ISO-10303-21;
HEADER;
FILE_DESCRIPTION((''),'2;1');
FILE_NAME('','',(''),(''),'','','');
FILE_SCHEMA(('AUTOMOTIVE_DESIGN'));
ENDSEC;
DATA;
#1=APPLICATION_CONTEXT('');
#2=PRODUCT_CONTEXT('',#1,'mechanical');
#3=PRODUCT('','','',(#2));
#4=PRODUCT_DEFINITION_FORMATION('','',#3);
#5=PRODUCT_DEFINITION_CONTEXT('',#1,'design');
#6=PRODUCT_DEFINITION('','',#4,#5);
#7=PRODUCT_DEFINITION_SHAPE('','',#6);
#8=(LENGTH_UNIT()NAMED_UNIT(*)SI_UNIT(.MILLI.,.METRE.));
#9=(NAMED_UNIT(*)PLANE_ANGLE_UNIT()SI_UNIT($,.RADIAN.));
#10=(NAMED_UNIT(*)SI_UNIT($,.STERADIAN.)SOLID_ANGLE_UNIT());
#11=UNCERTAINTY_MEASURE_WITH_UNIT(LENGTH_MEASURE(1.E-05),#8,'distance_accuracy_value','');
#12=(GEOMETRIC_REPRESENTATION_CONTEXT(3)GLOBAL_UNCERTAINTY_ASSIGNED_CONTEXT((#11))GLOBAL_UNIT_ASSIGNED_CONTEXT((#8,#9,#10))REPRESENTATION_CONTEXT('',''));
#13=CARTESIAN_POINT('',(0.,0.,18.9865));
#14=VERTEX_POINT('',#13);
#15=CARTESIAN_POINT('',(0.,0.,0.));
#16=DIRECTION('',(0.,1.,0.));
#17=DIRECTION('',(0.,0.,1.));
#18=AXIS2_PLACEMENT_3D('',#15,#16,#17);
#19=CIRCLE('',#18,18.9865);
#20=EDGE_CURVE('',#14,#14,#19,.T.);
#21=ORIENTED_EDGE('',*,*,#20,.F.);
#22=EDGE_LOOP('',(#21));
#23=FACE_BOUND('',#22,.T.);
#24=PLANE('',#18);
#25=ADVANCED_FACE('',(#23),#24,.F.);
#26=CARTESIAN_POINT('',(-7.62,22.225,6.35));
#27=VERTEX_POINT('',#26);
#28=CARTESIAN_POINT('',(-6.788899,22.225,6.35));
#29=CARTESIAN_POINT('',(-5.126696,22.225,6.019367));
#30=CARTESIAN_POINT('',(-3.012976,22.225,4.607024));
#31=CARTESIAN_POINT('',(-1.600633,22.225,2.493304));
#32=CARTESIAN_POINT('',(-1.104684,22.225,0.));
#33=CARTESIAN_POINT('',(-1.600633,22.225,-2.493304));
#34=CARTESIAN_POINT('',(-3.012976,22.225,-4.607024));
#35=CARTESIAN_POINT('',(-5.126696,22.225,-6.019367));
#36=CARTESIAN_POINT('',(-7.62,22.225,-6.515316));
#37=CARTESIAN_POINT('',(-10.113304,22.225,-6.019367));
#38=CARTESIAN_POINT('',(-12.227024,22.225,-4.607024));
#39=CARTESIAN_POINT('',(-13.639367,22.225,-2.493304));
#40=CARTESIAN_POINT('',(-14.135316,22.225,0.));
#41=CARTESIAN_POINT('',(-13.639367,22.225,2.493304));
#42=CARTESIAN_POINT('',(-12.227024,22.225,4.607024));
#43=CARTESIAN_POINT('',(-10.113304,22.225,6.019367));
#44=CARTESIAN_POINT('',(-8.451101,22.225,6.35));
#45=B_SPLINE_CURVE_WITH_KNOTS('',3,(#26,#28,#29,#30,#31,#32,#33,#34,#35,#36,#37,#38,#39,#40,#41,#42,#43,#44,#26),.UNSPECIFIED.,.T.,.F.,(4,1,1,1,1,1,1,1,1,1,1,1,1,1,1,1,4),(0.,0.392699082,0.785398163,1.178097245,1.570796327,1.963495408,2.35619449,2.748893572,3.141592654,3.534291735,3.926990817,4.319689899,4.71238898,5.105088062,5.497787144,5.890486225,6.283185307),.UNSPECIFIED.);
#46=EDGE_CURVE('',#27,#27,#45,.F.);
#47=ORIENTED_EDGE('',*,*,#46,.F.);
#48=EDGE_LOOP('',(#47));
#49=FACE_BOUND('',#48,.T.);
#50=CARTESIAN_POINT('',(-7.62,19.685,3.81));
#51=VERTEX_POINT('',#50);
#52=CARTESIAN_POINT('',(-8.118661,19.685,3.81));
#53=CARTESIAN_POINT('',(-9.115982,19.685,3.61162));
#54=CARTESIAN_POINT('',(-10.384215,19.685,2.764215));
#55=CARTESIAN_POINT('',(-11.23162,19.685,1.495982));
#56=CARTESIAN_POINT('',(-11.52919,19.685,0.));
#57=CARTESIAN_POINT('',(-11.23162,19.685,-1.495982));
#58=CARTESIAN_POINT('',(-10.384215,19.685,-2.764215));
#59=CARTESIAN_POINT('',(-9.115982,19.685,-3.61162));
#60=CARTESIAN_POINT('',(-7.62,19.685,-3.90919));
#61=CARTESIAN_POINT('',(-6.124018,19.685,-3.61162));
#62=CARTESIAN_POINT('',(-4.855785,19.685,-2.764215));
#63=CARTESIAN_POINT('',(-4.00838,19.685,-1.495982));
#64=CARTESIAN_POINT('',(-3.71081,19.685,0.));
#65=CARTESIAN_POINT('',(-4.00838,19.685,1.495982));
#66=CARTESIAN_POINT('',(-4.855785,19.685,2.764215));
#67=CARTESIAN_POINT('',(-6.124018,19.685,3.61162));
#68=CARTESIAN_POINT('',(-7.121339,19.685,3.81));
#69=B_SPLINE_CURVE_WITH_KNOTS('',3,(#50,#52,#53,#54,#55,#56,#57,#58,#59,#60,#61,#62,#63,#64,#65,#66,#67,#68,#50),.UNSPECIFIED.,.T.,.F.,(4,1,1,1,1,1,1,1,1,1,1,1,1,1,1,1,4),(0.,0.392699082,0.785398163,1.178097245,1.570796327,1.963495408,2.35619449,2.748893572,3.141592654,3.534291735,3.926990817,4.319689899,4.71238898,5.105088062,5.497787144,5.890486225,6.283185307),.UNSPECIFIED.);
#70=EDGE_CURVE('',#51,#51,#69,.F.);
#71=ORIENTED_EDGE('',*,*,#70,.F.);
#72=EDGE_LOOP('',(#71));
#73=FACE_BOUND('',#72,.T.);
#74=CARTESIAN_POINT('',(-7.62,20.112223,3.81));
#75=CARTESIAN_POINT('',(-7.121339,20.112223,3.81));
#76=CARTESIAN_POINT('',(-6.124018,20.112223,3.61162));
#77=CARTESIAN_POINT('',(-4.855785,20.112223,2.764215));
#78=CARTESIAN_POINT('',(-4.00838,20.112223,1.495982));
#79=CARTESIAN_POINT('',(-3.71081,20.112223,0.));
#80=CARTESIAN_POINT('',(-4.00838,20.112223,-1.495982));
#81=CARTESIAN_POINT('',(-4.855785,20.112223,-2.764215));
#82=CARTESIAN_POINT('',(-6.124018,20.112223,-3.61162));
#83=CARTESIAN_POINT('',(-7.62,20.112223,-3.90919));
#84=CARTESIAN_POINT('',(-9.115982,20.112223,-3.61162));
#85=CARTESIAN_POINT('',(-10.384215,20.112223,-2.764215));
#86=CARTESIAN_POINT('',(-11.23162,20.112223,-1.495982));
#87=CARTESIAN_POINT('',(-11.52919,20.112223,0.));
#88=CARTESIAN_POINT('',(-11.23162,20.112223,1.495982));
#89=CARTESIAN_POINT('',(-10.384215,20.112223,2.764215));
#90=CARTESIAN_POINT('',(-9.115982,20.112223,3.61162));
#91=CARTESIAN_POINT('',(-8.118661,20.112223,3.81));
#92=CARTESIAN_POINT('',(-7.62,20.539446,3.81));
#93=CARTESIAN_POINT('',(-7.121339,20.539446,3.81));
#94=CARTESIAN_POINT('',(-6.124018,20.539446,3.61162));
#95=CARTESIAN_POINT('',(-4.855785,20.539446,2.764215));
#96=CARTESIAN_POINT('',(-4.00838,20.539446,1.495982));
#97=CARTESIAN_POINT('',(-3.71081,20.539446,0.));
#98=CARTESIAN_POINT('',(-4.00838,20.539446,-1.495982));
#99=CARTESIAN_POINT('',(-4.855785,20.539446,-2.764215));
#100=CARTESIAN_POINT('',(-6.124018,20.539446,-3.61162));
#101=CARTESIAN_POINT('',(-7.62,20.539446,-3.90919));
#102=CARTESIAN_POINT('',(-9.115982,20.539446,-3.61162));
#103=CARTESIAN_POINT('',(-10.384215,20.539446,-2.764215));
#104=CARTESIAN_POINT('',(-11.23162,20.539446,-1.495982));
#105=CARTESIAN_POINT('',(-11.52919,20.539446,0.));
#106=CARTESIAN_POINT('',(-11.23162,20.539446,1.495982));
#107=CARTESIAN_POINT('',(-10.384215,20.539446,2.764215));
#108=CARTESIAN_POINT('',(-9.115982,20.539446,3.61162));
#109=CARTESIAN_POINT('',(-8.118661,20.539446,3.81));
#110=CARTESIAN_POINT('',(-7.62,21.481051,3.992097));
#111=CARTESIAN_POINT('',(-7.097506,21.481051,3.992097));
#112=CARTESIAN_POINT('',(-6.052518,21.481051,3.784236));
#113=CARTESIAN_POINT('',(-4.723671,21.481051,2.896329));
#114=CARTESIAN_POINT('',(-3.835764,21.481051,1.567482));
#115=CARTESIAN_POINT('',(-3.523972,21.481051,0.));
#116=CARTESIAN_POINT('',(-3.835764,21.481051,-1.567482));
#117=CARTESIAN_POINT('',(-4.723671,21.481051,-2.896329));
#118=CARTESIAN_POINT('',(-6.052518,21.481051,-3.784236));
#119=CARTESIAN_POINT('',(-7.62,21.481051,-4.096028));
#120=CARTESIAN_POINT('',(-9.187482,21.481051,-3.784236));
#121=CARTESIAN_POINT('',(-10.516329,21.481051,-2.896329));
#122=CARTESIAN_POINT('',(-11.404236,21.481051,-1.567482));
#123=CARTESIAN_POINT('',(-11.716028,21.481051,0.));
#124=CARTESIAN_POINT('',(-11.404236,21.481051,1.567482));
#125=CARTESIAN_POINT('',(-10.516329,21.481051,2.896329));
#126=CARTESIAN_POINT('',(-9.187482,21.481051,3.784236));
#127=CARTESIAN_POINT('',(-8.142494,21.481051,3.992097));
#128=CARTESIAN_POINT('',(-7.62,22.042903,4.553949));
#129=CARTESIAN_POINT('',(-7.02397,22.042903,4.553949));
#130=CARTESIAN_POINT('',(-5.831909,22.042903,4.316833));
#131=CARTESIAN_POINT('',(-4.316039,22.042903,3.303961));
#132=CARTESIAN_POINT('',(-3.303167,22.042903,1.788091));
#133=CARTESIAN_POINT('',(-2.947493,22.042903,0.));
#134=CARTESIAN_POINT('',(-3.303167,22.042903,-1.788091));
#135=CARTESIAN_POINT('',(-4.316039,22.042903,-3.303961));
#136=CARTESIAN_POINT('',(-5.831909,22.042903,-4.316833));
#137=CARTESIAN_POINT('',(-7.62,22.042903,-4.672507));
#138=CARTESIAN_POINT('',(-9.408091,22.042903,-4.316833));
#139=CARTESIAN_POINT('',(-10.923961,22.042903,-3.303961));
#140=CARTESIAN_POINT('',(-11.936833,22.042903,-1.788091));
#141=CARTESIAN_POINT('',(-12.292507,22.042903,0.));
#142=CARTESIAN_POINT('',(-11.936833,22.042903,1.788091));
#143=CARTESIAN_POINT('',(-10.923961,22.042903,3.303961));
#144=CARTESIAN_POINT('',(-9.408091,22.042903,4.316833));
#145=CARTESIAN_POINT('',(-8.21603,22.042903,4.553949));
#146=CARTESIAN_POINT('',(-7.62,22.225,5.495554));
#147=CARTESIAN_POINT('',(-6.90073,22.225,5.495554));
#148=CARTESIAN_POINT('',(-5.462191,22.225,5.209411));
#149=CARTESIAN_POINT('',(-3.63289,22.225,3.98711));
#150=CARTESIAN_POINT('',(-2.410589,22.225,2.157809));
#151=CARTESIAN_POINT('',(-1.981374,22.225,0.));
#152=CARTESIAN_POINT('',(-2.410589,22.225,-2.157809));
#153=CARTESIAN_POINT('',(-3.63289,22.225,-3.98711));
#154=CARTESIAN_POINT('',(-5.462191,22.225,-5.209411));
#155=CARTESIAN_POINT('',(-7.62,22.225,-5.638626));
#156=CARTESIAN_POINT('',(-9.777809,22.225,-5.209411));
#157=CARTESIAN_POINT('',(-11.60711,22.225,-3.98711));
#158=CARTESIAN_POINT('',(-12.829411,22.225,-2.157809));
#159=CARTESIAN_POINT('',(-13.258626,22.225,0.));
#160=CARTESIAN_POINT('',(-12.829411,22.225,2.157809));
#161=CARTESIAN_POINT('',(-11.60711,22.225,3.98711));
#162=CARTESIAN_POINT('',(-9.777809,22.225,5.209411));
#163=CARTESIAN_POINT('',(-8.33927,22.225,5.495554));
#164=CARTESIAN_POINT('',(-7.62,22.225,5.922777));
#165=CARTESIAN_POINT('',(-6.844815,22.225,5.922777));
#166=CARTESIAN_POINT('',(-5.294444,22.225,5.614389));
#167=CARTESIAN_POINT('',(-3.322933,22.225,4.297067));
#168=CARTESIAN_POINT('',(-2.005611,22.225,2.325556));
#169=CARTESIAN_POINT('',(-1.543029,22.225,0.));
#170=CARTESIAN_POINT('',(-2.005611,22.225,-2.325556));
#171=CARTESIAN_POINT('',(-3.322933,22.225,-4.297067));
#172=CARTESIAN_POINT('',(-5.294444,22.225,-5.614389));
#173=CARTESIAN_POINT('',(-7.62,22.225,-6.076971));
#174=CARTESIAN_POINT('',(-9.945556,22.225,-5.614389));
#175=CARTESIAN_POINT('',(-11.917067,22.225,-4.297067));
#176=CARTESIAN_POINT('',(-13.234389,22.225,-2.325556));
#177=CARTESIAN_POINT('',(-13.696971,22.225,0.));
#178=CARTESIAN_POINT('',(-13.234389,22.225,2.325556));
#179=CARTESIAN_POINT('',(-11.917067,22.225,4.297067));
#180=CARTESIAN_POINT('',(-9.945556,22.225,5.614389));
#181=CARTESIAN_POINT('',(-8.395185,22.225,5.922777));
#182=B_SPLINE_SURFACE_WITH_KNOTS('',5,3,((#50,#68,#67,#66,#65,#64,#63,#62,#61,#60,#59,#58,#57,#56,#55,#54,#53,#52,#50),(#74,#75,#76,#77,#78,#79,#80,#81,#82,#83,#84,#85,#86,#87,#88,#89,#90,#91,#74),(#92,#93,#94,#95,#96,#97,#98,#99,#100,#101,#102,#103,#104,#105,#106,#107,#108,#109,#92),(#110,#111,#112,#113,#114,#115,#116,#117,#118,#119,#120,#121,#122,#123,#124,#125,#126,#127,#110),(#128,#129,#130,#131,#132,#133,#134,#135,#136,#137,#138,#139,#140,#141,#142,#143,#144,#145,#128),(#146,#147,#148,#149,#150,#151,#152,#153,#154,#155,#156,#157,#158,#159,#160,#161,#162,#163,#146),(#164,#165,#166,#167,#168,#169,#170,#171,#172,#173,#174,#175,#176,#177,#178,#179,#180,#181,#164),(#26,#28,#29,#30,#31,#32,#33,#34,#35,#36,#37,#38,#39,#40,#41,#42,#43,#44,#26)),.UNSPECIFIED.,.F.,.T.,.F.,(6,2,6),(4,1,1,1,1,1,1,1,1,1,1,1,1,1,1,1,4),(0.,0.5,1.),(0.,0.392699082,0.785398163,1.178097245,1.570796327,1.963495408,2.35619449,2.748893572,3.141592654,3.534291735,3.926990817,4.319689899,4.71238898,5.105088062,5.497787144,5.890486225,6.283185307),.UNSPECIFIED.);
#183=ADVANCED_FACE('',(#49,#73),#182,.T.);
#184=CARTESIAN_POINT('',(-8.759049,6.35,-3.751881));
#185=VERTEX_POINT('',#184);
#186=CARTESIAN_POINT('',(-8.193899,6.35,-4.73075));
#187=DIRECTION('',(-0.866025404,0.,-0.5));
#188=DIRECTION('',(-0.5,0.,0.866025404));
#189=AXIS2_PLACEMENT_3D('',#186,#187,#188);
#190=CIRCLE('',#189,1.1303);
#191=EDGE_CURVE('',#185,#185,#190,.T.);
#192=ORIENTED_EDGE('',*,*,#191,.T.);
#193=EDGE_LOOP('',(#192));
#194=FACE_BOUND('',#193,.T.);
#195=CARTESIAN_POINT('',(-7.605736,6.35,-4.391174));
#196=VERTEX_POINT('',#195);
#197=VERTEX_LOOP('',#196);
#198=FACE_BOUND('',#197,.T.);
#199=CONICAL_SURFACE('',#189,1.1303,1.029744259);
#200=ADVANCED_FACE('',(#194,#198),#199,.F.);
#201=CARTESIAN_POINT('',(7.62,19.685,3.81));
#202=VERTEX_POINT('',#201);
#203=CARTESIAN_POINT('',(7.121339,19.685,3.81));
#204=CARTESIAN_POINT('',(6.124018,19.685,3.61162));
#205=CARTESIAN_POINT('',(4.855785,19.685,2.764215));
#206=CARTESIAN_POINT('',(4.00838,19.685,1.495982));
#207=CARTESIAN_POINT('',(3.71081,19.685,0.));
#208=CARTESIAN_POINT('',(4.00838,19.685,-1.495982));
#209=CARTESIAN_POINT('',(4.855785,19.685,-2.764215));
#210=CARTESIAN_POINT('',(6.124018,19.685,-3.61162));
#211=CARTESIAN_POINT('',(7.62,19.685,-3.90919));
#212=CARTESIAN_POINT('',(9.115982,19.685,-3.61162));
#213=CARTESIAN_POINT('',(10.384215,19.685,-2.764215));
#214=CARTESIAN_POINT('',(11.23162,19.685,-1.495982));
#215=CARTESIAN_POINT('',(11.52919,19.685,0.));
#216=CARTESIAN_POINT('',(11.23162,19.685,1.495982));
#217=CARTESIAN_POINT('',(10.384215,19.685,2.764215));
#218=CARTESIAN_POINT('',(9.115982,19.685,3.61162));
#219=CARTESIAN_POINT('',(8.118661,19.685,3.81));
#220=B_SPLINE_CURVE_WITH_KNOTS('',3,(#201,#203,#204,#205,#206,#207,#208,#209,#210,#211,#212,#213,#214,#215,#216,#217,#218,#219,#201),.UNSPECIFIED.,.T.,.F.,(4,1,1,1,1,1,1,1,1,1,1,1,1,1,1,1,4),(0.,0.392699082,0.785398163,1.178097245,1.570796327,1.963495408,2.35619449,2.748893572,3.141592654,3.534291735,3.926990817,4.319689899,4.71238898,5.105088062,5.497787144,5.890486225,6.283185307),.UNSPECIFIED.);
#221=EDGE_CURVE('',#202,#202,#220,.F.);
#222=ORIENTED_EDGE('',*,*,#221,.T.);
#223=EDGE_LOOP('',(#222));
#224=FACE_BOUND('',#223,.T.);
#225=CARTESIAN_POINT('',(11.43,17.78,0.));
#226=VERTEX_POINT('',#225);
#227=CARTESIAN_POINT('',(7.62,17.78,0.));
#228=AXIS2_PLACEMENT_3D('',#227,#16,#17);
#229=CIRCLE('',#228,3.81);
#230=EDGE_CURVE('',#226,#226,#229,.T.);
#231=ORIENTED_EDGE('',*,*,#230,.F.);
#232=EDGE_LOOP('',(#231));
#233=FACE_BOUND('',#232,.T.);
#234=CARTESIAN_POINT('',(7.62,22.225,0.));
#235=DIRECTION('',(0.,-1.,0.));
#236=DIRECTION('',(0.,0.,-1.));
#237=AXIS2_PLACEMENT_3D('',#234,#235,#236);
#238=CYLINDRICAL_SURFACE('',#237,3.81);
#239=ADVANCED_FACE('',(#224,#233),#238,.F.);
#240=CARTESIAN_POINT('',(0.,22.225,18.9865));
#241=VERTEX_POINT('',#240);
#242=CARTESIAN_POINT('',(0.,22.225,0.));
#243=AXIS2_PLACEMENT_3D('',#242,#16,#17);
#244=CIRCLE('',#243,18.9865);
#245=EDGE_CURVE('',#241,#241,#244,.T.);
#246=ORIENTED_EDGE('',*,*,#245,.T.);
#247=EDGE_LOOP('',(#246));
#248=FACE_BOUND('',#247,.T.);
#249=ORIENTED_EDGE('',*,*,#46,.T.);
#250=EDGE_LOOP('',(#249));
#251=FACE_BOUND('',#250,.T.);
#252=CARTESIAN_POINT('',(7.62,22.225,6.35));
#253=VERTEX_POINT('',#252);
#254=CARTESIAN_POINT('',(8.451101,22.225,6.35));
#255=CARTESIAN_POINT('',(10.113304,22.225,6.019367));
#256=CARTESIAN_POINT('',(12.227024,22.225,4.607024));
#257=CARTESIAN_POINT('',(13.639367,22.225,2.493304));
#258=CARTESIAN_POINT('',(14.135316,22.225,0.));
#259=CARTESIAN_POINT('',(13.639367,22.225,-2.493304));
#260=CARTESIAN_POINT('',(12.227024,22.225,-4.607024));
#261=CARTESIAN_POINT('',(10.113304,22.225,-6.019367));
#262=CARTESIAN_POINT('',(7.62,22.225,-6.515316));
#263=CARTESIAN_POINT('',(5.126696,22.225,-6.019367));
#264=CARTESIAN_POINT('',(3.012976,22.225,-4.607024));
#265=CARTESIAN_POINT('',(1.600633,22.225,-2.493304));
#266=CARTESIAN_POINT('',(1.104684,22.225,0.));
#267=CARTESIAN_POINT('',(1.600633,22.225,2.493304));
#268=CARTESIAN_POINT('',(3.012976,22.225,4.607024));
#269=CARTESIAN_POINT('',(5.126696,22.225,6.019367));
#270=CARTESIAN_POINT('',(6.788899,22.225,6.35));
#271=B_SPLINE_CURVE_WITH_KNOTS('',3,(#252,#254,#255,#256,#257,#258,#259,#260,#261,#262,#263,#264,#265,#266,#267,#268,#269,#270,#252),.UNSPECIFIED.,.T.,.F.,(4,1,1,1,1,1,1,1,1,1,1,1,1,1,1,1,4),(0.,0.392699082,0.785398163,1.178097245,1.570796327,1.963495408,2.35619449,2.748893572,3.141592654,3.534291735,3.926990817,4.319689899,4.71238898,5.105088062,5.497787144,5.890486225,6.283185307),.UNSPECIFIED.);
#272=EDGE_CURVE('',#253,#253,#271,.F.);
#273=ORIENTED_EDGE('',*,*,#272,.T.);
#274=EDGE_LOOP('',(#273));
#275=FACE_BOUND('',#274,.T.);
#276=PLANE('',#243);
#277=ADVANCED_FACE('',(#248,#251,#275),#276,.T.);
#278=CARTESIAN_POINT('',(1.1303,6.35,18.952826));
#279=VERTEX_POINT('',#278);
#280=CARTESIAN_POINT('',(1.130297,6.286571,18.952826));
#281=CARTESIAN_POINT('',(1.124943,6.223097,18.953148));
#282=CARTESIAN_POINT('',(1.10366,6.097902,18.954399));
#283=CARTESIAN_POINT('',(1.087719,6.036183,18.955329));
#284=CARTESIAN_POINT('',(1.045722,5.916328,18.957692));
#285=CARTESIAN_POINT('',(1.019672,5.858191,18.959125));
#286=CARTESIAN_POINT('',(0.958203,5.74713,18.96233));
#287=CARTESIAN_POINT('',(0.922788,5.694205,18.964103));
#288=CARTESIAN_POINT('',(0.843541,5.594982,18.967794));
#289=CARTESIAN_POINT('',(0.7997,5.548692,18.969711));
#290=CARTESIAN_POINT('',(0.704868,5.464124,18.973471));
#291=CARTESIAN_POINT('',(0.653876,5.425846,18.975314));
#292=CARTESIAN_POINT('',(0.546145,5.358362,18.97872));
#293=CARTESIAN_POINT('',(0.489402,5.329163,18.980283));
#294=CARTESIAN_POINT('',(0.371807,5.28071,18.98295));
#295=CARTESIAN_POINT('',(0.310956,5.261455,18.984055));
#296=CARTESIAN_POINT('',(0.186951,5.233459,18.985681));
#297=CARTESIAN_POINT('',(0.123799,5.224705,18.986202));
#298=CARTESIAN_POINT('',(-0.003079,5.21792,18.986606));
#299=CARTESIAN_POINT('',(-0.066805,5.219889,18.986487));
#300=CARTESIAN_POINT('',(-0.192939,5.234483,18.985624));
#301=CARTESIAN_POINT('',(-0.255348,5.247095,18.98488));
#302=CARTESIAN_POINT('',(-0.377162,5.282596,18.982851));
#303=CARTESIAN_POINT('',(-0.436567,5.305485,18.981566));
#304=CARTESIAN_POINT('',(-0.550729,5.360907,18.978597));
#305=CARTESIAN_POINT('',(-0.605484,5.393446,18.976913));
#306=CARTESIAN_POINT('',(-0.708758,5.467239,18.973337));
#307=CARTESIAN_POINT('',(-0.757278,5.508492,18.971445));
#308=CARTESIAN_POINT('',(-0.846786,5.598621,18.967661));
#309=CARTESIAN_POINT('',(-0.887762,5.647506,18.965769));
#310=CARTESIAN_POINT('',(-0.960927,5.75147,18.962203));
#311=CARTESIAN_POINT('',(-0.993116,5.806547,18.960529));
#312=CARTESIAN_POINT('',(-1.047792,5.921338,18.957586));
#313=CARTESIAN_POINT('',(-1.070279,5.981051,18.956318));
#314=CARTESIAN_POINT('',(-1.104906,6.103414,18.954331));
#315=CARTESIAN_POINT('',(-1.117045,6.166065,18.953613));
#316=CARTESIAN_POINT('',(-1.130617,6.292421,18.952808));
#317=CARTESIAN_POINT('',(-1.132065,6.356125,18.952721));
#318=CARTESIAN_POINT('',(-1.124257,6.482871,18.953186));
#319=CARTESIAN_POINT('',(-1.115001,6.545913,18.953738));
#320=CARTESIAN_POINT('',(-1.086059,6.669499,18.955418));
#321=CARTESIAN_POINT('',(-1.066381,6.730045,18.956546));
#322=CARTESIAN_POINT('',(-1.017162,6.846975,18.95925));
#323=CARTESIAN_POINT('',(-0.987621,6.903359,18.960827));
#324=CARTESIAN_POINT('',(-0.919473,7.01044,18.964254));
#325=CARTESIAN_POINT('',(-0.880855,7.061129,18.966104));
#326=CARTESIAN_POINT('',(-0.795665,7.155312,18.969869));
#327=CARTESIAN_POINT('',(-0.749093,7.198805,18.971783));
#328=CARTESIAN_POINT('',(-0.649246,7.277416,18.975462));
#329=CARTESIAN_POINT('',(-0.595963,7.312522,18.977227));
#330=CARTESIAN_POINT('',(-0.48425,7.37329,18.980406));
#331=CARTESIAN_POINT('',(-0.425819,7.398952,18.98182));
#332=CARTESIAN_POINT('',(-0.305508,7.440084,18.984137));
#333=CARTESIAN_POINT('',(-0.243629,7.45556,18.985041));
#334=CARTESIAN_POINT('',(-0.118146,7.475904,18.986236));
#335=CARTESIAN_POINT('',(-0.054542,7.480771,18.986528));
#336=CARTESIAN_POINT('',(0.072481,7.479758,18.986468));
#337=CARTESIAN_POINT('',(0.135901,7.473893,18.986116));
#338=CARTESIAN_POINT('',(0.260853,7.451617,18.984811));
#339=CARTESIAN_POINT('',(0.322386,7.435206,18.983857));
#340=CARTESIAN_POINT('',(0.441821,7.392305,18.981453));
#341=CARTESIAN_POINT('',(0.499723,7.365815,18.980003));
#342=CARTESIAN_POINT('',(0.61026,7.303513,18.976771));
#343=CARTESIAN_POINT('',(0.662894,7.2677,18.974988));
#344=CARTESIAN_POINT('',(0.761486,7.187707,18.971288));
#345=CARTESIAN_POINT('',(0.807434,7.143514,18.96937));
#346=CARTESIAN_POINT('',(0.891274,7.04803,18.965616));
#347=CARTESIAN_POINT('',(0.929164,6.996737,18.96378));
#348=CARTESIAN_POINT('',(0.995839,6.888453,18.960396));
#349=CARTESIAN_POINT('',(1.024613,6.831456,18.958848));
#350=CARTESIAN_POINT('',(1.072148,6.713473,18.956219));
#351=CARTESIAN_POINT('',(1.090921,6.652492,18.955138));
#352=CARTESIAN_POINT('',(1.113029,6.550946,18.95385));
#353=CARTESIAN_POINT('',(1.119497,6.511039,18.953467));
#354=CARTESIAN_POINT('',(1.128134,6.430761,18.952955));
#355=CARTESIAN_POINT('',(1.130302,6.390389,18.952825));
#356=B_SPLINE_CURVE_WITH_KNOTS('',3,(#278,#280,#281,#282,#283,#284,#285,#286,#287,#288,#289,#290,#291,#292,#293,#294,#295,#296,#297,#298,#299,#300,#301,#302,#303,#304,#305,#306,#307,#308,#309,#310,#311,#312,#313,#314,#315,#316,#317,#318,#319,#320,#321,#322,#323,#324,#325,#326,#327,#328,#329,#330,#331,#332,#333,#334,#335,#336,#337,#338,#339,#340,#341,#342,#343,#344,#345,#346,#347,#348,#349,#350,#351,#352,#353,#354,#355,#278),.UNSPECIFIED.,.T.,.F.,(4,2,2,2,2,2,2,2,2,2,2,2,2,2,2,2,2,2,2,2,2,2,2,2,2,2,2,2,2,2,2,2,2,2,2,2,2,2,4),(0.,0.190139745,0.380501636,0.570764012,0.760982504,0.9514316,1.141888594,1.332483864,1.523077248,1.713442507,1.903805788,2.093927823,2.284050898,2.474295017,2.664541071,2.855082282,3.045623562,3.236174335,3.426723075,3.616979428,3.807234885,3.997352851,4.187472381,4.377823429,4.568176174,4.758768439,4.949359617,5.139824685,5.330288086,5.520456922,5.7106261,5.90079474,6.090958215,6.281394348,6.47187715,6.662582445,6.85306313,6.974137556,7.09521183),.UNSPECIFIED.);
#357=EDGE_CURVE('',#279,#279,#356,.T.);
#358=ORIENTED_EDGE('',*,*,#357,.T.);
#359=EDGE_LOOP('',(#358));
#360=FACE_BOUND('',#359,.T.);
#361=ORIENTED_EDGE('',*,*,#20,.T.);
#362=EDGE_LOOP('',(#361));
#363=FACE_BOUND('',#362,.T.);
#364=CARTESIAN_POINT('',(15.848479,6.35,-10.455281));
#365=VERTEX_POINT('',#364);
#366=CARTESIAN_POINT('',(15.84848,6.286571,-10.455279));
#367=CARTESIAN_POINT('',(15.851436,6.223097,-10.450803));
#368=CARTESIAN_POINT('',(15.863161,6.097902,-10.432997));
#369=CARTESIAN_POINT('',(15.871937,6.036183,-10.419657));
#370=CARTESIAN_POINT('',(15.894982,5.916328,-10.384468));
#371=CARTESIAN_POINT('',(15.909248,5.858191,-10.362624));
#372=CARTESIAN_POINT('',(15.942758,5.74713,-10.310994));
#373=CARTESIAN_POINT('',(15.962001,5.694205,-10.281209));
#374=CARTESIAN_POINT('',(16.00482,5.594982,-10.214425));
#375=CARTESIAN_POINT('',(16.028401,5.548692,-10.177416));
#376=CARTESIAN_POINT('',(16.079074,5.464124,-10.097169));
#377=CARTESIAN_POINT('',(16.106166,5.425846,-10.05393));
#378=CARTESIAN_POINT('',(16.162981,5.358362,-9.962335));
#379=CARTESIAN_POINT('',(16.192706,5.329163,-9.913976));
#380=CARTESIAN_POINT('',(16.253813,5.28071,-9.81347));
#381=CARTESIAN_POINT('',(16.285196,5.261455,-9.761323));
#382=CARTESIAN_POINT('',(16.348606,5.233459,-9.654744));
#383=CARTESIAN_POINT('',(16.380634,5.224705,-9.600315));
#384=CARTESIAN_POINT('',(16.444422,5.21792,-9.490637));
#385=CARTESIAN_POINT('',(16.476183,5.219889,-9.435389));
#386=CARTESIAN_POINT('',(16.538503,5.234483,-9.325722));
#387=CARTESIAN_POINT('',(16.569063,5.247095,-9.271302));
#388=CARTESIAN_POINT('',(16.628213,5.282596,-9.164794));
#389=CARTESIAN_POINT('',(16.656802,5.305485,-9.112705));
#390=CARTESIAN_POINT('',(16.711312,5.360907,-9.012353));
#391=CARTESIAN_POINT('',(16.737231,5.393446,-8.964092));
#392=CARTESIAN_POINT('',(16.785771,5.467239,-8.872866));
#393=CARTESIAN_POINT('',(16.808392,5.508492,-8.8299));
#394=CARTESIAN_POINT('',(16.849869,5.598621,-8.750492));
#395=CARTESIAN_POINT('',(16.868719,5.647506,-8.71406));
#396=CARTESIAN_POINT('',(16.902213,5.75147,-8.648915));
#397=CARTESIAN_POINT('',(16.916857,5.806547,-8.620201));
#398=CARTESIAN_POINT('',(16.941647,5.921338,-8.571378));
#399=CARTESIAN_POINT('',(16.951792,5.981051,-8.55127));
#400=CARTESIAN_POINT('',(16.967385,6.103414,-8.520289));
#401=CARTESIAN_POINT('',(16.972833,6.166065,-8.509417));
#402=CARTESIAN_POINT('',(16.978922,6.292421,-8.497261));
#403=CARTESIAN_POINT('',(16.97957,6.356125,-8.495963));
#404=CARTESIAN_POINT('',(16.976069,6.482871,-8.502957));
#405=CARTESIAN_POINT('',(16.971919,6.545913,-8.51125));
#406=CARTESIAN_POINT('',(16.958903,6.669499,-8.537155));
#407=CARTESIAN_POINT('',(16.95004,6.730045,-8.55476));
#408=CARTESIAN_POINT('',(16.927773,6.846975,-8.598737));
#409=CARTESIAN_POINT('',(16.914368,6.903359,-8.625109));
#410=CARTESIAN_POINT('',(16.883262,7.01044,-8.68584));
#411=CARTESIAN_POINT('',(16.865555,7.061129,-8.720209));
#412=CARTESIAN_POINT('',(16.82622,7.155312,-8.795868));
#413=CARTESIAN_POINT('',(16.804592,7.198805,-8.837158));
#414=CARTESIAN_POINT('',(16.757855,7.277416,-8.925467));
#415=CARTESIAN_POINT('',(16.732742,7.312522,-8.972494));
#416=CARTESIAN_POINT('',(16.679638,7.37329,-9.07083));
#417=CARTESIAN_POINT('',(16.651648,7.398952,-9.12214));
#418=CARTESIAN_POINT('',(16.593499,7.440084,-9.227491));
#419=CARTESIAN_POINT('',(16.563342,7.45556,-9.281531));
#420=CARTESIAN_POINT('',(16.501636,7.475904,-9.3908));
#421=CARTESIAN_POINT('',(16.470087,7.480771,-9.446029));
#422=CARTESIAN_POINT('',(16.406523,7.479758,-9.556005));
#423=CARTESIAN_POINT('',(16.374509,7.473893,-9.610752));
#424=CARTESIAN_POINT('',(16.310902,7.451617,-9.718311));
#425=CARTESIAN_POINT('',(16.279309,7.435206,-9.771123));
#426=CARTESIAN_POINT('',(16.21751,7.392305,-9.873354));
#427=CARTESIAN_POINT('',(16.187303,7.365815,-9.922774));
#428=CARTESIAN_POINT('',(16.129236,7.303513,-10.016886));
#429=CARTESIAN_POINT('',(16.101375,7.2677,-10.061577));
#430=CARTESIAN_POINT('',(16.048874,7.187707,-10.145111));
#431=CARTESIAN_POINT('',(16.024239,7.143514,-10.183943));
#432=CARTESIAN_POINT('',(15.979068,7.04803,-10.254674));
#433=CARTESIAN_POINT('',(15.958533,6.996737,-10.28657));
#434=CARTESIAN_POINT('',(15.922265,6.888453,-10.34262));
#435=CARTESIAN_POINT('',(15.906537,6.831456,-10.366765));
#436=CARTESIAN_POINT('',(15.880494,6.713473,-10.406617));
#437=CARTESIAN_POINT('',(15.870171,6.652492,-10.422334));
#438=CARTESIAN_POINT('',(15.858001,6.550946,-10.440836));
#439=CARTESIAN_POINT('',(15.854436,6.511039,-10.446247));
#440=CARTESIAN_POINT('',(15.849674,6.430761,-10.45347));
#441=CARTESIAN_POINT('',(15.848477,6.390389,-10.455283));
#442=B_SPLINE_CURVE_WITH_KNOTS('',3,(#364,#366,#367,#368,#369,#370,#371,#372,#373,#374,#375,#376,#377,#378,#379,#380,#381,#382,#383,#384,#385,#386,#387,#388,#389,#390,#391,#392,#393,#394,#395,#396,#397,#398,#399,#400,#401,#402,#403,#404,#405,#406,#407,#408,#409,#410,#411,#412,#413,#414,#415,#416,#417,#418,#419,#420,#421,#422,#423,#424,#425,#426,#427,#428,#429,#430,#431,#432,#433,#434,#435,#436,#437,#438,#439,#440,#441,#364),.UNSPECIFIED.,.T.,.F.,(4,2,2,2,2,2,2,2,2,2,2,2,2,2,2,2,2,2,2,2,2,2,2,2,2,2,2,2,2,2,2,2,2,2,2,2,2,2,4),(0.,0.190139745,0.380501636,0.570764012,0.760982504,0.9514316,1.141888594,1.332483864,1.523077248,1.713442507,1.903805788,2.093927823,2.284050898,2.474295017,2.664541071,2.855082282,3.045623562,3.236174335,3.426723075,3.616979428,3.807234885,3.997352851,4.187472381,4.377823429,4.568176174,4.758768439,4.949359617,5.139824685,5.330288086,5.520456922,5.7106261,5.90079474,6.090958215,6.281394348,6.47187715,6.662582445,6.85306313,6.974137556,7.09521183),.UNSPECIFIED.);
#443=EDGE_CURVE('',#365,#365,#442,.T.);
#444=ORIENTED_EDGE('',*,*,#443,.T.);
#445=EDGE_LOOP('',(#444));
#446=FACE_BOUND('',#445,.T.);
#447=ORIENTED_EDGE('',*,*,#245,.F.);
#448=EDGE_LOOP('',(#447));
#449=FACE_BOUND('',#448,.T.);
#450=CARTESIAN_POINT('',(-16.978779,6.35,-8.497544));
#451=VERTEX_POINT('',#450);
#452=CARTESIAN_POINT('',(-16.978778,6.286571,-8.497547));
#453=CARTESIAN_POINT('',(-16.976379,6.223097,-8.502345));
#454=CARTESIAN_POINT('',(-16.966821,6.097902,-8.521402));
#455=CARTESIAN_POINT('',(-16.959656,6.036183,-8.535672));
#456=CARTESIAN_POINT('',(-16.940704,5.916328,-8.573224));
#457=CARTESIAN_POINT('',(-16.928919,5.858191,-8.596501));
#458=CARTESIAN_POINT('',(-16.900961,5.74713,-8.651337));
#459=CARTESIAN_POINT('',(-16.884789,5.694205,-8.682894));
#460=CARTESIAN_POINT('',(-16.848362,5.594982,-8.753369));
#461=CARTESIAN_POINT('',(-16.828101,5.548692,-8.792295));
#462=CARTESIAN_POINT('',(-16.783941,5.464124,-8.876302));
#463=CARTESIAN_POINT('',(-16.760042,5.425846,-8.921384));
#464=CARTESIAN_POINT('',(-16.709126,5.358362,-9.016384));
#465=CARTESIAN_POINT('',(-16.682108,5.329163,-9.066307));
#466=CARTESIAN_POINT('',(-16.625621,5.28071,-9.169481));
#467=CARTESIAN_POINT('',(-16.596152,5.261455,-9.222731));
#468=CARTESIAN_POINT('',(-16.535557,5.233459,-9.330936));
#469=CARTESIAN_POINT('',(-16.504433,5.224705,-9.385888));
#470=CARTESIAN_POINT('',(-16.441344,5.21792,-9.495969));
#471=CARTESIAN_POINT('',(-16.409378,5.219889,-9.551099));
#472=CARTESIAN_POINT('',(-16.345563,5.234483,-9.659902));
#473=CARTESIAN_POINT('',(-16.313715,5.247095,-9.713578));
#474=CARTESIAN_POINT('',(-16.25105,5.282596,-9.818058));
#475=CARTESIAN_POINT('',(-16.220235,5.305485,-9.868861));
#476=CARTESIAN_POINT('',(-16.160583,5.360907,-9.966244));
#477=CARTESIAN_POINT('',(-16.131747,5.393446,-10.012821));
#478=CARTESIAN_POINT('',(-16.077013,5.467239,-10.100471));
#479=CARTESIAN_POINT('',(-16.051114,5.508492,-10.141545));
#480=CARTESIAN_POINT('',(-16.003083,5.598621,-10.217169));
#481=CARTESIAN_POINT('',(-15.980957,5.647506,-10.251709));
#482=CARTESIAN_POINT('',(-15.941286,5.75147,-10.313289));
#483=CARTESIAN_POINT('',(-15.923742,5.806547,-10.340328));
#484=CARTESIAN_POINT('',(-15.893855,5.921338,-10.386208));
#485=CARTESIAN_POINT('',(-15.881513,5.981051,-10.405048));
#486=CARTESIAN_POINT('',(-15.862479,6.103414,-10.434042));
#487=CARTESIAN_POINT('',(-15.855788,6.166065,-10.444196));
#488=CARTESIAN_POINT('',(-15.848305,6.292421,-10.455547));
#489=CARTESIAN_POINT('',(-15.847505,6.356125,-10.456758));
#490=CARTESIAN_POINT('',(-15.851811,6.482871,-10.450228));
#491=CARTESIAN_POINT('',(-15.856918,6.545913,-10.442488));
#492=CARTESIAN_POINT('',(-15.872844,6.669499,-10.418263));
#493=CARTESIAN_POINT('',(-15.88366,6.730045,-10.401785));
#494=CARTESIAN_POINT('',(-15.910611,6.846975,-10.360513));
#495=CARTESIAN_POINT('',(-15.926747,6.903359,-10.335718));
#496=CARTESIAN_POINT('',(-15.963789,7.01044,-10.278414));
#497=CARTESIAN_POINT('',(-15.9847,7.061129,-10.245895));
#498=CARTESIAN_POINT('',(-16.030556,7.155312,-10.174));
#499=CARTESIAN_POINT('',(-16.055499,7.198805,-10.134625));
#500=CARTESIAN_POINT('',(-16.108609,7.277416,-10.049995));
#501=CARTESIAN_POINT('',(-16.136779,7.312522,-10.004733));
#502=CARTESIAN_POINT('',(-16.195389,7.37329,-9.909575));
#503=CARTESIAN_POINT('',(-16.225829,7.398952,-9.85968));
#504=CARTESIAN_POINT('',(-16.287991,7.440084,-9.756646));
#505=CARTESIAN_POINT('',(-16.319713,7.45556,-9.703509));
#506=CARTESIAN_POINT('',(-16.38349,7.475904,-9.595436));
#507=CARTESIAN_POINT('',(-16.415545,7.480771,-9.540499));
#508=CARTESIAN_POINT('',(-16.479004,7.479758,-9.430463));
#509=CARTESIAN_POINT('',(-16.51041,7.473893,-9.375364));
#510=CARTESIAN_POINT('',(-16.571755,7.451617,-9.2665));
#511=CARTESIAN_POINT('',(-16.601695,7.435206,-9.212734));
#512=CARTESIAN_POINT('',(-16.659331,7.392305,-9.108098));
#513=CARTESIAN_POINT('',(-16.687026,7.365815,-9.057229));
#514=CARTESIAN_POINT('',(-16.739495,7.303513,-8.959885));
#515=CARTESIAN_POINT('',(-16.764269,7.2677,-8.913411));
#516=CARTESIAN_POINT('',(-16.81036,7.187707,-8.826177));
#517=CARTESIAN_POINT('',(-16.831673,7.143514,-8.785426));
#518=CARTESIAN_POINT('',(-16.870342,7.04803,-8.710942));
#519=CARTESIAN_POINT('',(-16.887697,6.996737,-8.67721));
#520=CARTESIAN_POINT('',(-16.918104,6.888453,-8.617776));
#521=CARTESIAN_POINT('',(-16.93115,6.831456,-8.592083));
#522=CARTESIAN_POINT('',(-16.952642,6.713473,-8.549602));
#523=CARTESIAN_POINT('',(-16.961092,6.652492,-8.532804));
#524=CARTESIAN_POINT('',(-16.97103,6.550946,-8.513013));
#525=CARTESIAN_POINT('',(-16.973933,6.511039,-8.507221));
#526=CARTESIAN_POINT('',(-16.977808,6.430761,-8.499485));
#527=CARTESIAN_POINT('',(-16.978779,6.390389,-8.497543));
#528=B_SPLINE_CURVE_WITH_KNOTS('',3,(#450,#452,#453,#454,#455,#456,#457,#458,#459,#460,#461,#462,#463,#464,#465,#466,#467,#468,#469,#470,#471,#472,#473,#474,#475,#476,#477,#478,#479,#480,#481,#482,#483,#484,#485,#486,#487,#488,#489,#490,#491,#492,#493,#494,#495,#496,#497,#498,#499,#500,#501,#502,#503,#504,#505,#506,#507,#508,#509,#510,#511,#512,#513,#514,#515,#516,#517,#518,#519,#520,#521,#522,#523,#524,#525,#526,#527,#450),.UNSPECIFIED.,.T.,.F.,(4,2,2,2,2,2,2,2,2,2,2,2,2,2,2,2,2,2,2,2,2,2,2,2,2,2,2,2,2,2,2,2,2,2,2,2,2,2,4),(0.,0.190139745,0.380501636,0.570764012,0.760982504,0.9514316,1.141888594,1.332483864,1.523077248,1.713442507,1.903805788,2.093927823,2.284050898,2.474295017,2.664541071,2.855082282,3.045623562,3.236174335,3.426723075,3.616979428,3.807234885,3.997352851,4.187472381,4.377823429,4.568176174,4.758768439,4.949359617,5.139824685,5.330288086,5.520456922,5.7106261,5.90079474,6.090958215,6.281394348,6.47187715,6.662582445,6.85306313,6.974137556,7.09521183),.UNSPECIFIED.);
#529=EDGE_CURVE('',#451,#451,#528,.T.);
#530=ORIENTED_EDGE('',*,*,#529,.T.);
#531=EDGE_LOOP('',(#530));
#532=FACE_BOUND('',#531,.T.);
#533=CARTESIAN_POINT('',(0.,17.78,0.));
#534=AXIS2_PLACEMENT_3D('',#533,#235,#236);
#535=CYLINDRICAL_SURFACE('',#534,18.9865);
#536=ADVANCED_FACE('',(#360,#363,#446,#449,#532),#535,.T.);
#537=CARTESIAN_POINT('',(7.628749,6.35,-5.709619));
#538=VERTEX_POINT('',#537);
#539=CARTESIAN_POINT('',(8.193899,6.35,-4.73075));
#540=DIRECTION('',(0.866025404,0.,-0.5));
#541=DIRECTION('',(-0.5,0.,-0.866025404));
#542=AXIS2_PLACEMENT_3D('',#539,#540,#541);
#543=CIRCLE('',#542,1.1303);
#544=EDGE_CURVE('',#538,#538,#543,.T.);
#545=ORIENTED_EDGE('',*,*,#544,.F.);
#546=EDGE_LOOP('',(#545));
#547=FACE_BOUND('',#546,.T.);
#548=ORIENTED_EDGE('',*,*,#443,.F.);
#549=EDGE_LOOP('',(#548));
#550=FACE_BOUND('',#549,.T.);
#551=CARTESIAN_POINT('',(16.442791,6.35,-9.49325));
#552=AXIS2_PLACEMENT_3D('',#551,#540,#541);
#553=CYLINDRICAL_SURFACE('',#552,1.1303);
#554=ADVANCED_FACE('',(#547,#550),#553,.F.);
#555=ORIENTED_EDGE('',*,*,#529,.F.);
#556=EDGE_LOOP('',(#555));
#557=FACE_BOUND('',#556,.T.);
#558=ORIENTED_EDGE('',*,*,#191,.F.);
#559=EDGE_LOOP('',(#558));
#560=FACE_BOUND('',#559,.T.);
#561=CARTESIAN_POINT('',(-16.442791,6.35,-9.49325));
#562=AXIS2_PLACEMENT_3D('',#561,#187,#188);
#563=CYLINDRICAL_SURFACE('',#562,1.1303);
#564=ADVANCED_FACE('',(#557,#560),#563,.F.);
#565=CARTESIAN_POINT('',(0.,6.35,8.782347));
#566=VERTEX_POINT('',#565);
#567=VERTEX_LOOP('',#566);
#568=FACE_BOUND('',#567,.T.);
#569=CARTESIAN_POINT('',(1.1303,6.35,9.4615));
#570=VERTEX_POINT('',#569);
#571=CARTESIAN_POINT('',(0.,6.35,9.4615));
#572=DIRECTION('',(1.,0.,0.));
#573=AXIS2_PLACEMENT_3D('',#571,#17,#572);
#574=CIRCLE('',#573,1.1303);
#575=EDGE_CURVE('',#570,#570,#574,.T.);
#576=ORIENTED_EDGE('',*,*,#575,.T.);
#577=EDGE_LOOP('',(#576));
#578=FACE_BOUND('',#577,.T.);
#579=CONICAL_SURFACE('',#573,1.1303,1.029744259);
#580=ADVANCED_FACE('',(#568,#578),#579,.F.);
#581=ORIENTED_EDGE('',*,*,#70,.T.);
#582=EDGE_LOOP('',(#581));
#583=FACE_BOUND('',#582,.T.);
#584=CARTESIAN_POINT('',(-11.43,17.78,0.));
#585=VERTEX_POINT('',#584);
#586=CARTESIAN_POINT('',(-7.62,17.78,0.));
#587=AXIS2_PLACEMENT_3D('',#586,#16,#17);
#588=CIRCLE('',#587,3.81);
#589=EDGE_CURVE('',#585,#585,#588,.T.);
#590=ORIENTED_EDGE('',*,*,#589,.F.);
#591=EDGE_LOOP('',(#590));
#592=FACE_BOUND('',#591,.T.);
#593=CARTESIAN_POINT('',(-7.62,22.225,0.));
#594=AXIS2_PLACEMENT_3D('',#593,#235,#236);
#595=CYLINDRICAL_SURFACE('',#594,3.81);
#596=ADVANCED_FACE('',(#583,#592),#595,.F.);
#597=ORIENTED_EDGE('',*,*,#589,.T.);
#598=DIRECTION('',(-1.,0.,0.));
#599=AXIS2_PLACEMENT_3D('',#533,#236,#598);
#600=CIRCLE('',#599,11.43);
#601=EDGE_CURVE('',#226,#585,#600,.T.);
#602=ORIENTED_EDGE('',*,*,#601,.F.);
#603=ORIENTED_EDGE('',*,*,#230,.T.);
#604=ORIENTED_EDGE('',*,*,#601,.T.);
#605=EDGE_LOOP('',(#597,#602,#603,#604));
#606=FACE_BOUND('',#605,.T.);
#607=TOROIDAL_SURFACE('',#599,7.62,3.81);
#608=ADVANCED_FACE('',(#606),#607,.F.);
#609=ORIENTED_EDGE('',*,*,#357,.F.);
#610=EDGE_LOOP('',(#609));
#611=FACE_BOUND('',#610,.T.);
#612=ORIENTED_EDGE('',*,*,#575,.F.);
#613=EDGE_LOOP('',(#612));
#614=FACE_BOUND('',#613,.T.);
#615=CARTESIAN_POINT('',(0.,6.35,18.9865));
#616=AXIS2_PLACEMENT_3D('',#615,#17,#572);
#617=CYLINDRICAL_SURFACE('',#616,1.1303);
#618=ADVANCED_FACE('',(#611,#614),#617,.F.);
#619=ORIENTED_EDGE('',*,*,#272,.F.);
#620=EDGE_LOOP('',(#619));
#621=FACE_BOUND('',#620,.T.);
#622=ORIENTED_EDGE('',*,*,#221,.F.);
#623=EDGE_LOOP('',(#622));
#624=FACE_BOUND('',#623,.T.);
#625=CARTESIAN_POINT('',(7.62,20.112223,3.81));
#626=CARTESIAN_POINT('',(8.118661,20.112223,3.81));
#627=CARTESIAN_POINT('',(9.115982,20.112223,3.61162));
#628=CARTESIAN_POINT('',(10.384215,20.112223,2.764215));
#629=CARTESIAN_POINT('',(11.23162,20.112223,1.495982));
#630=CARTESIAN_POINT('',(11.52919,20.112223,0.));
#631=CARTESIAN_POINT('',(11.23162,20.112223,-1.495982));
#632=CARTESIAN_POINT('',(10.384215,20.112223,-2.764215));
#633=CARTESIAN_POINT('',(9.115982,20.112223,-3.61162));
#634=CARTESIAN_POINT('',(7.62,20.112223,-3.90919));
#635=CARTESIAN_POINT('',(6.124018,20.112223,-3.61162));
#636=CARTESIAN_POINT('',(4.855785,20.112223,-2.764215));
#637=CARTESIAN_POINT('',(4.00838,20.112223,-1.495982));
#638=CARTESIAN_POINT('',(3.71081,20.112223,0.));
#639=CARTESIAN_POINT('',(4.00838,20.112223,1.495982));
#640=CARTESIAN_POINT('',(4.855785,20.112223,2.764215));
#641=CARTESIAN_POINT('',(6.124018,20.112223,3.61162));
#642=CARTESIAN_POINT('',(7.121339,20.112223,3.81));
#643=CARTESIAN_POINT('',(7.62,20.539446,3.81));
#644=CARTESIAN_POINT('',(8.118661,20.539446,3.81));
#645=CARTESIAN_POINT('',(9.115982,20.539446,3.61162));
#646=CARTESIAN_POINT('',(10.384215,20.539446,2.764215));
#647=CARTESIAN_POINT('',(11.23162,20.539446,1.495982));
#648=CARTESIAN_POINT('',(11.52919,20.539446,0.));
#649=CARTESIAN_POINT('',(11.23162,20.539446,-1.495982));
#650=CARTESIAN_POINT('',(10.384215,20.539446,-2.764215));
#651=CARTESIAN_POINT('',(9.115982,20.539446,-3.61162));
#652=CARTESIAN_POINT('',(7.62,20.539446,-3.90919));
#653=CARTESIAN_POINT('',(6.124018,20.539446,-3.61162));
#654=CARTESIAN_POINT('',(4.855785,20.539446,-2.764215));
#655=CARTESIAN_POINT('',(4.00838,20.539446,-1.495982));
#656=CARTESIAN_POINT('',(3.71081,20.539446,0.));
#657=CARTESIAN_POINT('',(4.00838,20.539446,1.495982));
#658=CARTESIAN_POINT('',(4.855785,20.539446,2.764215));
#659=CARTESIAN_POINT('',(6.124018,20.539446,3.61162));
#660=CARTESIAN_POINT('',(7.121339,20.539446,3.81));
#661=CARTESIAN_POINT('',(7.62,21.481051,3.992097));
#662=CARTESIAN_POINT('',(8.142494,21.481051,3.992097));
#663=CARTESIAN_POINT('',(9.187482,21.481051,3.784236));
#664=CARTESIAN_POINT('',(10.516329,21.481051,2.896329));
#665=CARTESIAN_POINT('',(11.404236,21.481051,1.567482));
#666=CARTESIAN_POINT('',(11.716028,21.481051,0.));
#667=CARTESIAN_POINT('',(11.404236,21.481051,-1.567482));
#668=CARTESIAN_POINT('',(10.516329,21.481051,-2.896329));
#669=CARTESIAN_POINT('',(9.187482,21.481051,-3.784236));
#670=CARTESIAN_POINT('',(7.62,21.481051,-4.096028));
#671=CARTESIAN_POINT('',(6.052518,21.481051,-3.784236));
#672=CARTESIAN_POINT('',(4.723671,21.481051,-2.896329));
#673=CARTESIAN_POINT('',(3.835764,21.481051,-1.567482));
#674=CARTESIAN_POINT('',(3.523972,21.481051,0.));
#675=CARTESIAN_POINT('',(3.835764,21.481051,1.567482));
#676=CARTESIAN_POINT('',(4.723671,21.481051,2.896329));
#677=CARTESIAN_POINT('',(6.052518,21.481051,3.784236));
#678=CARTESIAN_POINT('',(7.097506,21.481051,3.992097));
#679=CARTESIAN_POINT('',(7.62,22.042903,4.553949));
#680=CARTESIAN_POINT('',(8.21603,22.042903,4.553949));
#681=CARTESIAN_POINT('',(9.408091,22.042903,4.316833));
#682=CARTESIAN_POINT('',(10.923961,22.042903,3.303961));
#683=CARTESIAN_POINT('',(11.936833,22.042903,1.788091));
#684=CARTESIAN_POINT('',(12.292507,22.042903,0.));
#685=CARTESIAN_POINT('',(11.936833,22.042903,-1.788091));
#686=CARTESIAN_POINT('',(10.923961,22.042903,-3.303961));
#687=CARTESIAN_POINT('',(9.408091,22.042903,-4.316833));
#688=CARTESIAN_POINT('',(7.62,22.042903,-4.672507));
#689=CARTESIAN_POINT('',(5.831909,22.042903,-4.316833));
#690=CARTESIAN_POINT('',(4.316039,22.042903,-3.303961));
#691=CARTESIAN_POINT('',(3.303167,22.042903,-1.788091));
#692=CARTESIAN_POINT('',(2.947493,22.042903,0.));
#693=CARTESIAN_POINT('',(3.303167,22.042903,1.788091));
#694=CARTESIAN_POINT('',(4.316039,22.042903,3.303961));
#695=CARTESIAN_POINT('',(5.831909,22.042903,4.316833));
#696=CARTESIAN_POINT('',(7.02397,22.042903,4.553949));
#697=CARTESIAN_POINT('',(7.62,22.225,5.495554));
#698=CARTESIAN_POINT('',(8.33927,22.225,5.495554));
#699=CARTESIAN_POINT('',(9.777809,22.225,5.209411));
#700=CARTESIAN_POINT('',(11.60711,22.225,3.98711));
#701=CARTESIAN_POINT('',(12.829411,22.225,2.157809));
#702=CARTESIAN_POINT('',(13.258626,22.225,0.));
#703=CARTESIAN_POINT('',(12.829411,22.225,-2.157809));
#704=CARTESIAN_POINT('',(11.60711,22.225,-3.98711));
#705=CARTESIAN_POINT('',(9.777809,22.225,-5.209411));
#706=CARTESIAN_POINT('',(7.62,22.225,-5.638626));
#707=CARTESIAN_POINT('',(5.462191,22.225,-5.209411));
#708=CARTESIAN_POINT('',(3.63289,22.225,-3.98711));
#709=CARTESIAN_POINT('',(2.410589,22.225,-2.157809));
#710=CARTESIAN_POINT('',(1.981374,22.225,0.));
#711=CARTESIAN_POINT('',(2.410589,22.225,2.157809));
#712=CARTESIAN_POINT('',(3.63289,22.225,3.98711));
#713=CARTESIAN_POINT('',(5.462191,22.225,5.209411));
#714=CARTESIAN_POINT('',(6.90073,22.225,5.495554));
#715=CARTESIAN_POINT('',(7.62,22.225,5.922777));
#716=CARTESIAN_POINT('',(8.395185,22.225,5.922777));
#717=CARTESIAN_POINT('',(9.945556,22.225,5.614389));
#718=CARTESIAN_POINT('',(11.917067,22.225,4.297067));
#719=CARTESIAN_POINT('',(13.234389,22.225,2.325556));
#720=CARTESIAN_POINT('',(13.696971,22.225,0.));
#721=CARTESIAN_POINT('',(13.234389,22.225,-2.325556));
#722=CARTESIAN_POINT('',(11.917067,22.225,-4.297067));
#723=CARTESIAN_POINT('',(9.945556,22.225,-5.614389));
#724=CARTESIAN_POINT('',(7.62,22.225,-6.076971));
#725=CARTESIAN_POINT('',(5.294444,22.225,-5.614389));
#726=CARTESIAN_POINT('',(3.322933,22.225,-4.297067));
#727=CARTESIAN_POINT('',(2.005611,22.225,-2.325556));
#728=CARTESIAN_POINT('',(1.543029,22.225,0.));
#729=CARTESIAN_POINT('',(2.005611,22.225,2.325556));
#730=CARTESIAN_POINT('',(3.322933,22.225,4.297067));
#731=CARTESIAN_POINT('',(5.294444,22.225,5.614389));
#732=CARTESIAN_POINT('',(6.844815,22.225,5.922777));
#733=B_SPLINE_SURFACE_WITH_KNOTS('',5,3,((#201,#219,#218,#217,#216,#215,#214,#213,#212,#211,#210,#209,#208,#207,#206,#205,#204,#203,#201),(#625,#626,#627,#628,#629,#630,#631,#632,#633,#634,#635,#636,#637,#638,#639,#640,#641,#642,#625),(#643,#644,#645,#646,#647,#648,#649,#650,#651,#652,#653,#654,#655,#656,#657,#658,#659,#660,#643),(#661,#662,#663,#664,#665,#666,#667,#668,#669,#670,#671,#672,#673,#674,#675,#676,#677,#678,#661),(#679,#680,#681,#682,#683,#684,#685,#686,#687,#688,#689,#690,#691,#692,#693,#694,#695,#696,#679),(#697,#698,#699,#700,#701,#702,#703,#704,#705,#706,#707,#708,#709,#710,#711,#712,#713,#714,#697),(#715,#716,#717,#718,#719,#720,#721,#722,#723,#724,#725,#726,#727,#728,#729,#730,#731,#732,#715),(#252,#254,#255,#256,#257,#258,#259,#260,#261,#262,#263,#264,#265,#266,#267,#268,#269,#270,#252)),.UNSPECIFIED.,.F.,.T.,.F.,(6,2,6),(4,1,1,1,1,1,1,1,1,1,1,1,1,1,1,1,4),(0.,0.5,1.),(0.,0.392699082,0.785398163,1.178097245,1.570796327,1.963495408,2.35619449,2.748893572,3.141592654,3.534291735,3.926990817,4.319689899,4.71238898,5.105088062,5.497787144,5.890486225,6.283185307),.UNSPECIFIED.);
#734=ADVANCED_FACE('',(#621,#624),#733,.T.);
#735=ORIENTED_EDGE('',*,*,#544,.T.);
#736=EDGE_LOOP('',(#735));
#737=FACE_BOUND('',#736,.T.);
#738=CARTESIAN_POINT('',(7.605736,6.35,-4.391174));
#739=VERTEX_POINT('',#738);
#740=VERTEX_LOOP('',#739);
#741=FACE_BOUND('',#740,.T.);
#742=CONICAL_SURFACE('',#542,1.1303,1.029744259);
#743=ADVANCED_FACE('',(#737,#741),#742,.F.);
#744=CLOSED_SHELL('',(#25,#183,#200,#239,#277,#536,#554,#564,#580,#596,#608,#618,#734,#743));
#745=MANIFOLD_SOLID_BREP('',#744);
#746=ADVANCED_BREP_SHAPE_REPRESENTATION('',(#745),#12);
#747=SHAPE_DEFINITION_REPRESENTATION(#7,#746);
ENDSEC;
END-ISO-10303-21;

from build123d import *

# Parameters (mm, degrees)
SKETCH1_R           = 18.9865
BOSS_EXTRUDE1_DEPTH = 17.78
SKETCH2_R           = 3.81
SKETCH3_R           = 18.9865
SKETCH3_R_2         = 3.81
BOSS_EXTRUDE2_DEPTH = 4.445
FILLET1_SIZE        = 2.54
CIRPATTERN1_COUNT   = 3


with BuildPart() as part:
    # Sketch1 → Boss-Extrude1 (new body)
    with BuildSketch(Plane(origin=(0, 0, 0), x_dir=(1, 0, 0), z_dir=(0, 1, 0))):
        with Locations(Location((0, 0, 0), (0, 0, 270))):
            Circle(SKETCH1_R)
    extrude(amount=BOSS_EXTRUDE1_DEPTH)

    # Sketch2 → Cut-Revolve1 (revolve, cut)
    with BuildSketch(Plane(origin=(0, 17.78, 0), x_dir=(1, 0, 0), z_dir=(0, 1, 0)), mode=Mode.PRIVATE) as cut_revolve1_sk:
        with Locations((-7.62, 0)):
            Circle(SKETCH2_R)
    revolve(cut_revolve1_sk.sketch.rotate(Axis((0, 17.78, -18.9865), (0, 0, 1)), 90), axis=Axis((0, 17.78, -18.9865), (0, 0, 1)), mode=Mode.SUBTRACT)

    # Sketch3 → Boss-Extrude2 (add)
    with BuildSketch(Plane(origin=(0, 17.78, 0), x_dir=(1, 0, 0), z_dir=(0, 1, 0))):
        with Locations(Location((0, 0, 0), (0, 0, 270))):
            Circle(SKETCH3_R)
        with Locations((7.62, 0)):
            Circle(SKETCH3_R_2, mode=Mode.SUBTRACT)
        with Locations(Location((-7.62, 0, 0), (0, 0, 180))):
            Circle(SKETCH3_R_2, mode=Mode.SUBTRACT)
    extrude(amount=BOSS_EXTRUDE2_DEPTH)

    # Fillet1
    # a fillet whose section is not a circle: 2.54 mm, written as the material it takes off along each edge
    with BuildSketch(Plane(origin=(7.62, 22.225, 0), x_dir=(1, 0, 0), z_dir=(0, 0, 1))) as fillet1_piece_1:
        with BuildLine():
            add(Edge.make_bspline([(3.81 + FILLET1_SIZE, 0), (3.81 + FILLET1_SIZE * 0.831801948466, 0), (3.81 + FILLET1_SIZE * 0.663603896932, 0), (3.81 + FILLET1_SIZE * 0.292893218813, -FILLET1_SIZE * 0.0716919198361), (3.81 + FILLET1_SIZE * 0.0716919198361, -FILLET1_SIZE * 0.292893218813), (3.81, -FILLET1_SIZE * 0.663603896932), (3.81, -FILLET1_SIZE * 0.831801948466), (3.81, -FILLET1_SIZE)], knots=[0, 0, 0, 0, 0, 0, 0.5, 0.5, 1, 1, 1, 1, 1, 1], degree=5))
            Line((3.81, -FILLET1_SIZE), (3.81, 0))
            Line((3.81, 0), (3.81 + FILLET1_SIZE, 0))
        make_face()
    revolve(axis=Axis((7.62, 22.225, 0), (0, 1, 0)), mode=Mode.SUBTRACT)
    with BuildSketch(Plane(origin=(-7.62, 22.225, 0), x_dir=(-1, 0, 0), z_dir=(0, 0, -1))) as fillet1_piece_2:
        with BuildLine():
            add(Edge.make_bspline([(3.81 + FILLET1_SIZE, 0), (3.81 + FILLET1_SIZE * 0.831801948466, 0), (3.81 + FILLET1_SIZE * 0.663603896932, 0), (3.81 + FILLET1_SIZE * 0.292893218813, -FILLET1_SIZE * 0.0716919198361), (3.81 + FILLET1_SIZE * 0.0716919198361, -FILLET1_SIZE * 0.292893218813), (3.81, -FILLET1_SIZE * 0.663603896932), (3.81, -FILLET1_SIZE * 0.831801948466), (3.81, -FILLET1_SIZE)], knots=[0, 0, 0, 0, 0, 0, 0.5, 0.5, 1, 1, 1, 1, 1, 1], degree=5))
            Line((3.81, -FILLET1_SIZE), (3.81, 0))
            Line((3.81, 0), (3.81 + FILLET1_SIZE, 0))
        make_face()
    revolve(axis=Axis((-7.62, 22.225, 0), (0, 1, 0)), mode=Mode.SUBTRACT)

    # Sketch5 → Tap Drill for #4-40 Tap1 (revolve, cut)
    with BuildSketch(Plane(origin=(0, 6.35, 18.9865), x_dir=(0, -1, 0), z_dir=(1, 0, 0))):
        Polygon((0, 0), (0, 10.204152758), (1.1303, 9.525), (1.1303, 0), align=None)
    tap_drill_for_4_40_tap1 = revolve(axis=Axis((0, 6.35, 25.3365), (0, 0, -1)), mode=Mode.SUBTRACT)

    # CirPattern1: Tap Drill for #4-40 Tap1 ×3 about axis
    cirpattern1_axis = Axis((0, 0, 0), (0, -1, 0))
    for i in range(1, CIRPATTERN1_COUNT):
        add(tap_drill_for_4_40_tap1.rotate(cirpattern1_axis, i * 360 / CIRPATTERN1_COUNT), mode=Mode.SUBTRACT)


solid = part.part
